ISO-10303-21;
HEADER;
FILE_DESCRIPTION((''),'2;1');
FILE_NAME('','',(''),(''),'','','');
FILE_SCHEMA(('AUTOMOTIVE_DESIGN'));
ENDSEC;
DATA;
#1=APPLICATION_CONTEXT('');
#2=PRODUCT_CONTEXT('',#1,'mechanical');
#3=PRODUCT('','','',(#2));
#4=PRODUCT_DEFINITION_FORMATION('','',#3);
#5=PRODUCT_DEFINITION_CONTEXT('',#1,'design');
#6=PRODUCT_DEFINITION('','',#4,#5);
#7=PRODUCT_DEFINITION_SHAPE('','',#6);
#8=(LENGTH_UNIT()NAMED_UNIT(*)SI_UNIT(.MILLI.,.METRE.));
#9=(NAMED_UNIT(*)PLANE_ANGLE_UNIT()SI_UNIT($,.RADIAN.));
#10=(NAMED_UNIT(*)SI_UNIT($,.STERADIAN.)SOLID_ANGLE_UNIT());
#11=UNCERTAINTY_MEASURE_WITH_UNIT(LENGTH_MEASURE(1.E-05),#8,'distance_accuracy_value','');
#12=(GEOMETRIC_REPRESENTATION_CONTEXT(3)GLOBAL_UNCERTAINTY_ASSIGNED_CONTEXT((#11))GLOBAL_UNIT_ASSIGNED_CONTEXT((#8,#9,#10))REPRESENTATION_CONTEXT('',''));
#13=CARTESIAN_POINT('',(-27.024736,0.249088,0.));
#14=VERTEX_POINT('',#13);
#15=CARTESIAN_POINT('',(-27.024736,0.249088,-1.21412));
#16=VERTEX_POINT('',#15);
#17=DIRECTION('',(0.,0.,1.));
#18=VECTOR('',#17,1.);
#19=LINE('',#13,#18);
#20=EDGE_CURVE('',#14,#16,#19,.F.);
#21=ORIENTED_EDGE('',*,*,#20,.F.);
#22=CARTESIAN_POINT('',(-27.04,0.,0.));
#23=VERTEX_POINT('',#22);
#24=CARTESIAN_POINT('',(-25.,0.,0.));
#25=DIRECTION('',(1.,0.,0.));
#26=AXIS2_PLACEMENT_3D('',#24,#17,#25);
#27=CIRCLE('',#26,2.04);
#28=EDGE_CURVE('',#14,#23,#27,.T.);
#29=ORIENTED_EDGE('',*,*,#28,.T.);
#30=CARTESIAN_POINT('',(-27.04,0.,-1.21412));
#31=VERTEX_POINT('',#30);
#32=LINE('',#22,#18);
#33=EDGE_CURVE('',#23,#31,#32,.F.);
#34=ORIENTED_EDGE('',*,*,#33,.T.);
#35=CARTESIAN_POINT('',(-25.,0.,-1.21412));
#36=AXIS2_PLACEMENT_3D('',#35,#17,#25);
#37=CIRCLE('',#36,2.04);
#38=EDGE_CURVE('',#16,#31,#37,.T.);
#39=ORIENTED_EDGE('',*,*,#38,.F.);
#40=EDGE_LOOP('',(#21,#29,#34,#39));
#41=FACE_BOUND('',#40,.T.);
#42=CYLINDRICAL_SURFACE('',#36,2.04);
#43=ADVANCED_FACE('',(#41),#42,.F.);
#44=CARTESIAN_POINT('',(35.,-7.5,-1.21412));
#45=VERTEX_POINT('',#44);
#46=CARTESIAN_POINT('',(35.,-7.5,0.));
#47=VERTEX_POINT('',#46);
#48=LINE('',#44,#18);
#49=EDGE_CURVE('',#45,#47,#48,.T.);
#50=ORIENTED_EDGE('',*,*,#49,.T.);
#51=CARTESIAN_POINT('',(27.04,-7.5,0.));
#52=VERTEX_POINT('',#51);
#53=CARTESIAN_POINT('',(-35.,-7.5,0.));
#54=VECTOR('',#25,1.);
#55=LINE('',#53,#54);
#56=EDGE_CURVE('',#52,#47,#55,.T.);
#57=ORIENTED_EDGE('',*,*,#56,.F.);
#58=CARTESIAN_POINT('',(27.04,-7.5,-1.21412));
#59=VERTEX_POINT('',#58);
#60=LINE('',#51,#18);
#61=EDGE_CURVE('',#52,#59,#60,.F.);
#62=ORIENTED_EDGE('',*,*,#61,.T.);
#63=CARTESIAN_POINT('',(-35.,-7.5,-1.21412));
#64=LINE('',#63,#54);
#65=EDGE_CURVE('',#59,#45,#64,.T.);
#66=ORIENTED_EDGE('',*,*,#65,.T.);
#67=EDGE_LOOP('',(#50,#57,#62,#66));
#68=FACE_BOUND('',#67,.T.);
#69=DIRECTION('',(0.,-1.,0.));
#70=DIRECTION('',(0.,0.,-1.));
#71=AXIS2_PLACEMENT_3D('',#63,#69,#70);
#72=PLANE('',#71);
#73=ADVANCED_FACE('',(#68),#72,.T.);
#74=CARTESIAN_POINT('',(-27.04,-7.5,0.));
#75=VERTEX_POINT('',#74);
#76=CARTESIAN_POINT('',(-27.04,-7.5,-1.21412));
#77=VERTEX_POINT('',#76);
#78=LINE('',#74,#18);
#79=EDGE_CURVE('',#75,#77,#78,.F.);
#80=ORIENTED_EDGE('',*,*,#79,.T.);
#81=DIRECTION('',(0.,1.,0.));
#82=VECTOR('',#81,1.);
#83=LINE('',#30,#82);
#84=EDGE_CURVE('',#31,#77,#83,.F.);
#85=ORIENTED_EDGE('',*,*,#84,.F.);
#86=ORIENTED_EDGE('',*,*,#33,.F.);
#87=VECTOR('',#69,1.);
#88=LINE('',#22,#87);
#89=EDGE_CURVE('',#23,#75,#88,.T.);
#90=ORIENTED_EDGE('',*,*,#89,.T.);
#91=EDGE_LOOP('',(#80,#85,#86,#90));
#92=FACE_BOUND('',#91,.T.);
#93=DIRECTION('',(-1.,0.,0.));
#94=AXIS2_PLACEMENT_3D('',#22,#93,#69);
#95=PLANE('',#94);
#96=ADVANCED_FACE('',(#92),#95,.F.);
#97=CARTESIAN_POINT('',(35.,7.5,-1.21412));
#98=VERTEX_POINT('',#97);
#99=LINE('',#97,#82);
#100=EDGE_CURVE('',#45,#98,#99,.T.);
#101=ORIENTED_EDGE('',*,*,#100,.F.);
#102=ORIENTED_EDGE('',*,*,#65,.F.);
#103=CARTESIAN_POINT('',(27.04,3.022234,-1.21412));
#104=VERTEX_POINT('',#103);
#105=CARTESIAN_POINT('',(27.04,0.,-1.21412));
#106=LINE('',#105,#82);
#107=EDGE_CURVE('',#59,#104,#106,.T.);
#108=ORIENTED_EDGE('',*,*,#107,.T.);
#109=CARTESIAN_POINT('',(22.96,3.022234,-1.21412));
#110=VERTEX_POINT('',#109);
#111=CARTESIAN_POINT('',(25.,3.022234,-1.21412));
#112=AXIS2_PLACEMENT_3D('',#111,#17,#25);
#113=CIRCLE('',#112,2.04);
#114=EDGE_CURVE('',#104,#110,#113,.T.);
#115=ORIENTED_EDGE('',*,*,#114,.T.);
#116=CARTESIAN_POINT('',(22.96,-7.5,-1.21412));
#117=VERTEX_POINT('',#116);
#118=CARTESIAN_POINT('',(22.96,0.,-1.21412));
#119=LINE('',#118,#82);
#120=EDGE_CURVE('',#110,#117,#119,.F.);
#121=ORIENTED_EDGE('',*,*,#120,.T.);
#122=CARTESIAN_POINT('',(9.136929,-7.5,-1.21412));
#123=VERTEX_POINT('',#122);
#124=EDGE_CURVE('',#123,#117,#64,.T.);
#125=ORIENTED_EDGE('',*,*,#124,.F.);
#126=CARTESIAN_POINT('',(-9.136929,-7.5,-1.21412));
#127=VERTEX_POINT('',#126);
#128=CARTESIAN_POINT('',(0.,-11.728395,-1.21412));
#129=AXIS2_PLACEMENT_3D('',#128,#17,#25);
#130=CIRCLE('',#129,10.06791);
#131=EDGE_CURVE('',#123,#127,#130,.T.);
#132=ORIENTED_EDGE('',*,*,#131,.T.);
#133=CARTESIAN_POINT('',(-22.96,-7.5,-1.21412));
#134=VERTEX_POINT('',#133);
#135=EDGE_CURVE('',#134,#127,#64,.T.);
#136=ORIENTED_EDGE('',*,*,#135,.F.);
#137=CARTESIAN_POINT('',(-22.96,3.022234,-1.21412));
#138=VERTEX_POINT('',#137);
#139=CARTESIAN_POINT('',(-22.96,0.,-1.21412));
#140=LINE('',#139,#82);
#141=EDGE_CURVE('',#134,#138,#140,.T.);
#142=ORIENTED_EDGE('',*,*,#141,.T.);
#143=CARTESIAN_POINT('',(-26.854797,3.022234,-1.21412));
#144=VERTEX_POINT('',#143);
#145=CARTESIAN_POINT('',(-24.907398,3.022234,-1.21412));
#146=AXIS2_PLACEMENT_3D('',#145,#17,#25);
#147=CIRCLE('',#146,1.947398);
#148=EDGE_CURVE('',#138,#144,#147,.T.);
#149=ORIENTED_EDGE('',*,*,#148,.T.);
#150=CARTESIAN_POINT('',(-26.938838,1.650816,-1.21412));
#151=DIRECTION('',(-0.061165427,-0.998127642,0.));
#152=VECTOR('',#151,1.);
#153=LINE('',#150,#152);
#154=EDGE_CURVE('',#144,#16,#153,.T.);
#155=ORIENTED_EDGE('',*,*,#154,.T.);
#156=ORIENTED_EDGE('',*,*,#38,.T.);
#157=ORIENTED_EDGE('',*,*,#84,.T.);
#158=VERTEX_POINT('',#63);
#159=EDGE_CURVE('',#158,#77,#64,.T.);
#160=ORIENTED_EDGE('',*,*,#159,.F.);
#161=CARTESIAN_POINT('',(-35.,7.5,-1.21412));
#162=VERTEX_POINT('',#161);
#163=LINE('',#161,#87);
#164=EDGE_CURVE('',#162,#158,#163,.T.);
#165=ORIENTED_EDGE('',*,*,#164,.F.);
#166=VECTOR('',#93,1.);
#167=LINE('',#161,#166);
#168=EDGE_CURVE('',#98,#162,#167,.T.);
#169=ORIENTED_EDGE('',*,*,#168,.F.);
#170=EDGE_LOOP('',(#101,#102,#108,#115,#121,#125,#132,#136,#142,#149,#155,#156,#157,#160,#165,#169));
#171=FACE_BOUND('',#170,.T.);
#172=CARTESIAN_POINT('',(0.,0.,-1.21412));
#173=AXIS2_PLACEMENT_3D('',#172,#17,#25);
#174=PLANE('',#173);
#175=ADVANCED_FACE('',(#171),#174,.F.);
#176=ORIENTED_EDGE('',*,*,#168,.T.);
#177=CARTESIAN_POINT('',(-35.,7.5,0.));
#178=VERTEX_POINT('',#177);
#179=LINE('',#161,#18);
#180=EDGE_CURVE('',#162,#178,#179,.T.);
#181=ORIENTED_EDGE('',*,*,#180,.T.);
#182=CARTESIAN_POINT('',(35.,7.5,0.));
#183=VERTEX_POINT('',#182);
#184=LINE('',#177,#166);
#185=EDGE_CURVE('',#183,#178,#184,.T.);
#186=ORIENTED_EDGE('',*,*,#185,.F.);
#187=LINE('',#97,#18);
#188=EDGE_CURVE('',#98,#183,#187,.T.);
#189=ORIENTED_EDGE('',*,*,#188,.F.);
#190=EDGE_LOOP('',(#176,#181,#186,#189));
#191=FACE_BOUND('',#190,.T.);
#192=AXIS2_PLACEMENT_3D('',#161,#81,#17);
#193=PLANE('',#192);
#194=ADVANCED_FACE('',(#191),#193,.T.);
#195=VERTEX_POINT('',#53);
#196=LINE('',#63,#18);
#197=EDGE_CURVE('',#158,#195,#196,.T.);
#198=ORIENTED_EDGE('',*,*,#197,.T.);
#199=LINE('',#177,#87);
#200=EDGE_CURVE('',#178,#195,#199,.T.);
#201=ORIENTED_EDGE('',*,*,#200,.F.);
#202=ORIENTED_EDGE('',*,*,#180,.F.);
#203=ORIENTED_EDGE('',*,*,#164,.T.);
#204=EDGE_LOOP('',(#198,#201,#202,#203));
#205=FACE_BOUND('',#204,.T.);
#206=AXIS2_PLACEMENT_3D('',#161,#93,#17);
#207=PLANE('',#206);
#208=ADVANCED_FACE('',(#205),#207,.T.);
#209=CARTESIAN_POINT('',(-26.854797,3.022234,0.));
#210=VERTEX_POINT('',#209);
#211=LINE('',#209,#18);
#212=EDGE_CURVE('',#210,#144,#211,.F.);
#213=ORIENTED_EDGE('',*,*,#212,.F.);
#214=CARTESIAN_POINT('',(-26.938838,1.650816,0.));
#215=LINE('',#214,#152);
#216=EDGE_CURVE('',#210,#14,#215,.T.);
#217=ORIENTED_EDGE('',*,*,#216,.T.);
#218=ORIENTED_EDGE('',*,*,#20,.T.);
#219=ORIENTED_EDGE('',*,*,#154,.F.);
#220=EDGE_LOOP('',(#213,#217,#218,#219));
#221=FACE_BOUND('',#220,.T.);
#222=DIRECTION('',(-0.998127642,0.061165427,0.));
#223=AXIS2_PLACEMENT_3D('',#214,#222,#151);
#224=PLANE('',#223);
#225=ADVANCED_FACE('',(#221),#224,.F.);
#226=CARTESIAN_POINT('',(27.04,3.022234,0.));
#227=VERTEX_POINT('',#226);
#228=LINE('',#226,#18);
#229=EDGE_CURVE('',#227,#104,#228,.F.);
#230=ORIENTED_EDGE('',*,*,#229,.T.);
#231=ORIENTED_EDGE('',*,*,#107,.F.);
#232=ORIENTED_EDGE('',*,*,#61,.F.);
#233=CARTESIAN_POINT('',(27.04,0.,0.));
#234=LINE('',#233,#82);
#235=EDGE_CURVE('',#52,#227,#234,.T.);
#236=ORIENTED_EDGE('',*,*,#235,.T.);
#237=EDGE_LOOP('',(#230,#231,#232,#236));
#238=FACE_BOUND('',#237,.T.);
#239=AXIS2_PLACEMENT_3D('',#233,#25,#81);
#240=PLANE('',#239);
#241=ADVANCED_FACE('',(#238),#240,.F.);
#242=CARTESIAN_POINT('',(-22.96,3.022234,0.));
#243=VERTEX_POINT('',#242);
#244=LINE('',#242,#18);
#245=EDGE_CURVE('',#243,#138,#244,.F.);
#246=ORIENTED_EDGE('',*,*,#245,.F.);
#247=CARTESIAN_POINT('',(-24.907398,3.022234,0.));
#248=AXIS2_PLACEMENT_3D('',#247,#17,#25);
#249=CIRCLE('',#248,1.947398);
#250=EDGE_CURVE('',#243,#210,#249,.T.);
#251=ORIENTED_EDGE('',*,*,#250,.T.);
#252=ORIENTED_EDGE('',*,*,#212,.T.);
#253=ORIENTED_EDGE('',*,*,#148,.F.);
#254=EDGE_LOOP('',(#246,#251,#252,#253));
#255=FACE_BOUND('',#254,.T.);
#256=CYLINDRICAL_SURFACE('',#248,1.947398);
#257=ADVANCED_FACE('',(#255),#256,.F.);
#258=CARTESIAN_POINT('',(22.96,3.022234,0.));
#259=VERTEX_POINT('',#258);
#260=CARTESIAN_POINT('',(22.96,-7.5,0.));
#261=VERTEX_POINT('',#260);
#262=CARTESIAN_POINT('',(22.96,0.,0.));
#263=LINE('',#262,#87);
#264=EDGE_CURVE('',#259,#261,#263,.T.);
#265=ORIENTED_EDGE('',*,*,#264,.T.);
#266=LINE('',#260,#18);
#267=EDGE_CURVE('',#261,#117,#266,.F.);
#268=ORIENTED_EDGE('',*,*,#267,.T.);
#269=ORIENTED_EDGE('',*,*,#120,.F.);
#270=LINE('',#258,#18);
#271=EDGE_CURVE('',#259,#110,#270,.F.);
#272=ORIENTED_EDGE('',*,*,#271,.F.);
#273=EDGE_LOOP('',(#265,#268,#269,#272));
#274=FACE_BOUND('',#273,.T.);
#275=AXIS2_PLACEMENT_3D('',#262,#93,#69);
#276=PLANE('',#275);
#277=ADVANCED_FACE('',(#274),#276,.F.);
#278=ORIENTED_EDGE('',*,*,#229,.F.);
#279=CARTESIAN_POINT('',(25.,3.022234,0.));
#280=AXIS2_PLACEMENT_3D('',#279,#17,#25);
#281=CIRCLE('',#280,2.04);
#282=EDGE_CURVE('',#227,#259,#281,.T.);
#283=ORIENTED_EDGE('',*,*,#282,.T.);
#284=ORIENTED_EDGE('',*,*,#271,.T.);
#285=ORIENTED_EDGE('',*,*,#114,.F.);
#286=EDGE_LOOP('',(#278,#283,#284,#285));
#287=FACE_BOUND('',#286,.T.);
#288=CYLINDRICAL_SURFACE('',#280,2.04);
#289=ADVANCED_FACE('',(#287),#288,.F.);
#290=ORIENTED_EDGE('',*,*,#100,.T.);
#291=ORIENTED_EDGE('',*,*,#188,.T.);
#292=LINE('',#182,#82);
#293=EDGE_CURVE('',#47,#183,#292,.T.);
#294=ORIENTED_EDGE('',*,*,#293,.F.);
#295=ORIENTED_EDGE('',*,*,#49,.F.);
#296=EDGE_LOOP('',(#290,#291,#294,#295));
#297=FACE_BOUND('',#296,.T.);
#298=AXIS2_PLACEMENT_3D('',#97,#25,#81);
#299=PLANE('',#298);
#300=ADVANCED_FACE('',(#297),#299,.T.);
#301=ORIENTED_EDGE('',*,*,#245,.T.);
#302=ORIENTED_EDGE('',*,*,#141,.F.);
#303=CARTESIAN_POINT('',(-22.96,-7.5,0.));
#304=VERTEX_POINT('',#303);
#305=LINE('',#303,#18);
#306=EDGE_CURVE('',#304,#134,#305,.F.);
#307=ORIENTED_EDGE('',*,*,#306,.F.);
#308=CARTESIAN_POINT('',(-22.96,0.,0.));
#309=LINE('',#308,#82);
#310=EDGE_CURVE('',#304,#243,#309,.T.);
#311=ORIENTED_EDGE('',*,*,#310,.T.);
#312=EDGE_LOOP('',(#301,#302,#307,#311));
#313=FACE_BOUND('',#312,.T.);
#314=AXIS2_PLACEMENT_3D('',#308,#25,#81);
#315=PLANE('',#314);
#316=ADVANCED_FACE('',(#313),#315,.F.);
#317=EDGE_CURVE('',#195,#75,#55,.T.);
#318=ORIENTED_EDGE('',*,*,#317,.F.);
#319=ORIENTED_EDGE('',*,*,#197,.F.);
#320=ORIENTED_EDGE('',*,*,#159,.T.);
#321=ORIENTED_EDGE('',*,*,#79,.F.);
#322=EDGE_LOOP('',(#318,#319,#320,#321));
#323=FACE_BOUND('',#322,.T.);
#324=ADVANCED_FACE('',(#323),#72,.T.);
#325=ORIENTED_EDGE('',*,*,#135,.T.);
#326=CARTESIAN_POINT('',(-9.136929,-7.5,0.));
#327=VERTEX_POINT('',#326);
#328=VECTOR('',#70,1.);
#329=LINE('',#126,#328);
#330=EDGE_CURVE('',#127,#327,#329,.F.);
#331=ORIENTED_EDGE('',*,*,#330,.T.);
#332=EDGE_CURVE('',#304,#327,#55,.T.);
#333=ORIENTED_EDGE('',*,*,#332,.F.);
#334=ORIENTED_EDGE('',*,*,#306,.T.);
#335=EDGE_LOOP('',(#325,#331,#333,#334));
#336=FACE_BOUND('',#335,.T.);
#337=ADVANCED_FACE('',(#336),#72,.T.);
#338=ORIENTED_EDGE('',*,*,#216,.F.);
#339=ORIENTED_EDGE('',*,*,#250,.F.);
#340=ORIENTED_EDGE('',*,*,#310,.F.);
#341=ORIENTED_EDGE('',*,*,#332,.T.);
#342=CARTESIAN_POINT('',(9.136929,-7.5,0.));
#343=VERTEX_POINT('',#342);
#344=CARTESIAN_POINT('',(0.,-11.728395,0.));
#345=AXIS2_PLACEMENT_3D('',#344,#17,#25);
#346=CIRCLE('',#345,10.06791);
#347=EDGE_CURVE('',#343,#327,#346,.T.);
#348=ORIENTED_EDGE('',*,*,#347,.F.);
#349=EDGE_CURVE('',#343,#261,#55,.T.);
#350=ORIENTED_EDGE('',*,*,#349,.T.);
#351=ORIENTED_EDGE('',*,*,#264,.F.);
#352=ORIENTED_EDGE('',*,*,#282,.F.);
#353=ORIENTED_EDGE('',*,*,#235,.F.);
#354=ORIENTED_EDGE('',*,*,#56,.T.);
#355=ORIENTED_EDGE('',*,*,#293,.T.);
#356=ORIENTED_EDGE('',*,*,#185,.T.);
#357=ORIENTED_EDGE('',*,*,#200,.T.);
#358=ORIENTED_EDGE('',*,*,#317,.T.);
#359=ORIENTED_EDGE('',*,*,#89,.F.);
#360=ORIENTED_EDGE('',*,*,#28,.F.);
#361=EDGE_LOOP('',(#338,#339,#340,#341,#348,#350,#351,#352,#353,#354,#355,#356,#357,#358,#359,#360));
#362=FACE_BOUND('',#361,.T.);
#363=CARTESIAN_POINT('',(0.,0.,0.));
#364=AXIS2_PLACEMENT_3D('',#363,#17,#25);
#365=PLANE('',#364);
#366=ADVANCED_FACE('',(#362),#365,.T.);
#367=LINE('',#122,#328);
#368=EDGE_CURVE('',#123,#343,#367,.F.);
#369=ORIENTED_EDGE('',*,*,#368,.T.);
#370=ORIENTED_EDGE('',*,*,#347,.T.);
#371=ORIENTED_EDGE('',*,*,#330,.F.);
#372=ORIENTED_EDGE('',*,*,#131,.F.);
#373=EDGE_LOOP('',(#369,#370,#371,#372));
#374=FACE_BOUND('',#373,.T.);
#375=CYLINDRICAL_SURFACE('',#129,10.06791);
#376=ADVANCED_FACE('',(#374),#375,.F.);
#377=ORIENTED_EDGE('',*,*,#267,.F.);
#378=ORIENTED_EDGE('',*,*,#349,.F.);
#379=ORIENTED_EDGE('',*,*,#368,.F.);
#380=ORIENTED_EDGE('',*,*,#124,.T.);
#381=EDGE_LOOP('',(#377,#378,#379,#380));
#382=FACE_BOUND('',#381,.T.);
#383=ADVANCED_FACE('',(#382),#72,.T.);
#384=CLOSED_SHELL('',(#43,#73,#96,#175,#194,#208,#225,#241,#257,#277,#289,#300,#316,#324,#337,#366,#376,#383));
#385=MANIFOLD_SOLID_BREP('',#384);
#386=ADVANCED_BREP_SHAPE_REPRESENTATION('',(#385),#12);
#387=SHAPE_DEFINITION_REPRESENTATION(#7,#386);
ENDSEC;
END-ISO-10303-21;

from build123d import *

# Parameters (mm, degrees)
SKETCH1_W          = 70
SKETCH1_H          = 15
SKETCH1_R          = 2.04
BASE_FLANGE1_DEPTH = 1.21412
SKETCH3_R          = 10.067909511
CUT_EXTRUDE1_DEPTH = 10
CUT_EXTRUDE2_DEPTH = 10


# Sheet-metal steps are written as plain solids
with BuildPart() as part:
    # Sketch1 → Base-Flange1 (new body)
    with BuildSketch(Plane.XY):
        Rectangle(SKETCH1_W, SKETCH1_H)
        with Locations((-25, 0)):
            Circle(SKETCH1_R, mode=Mode.SUBTRACT)
        with Locations((25, 0)):
            Circle(SKETCH1_R, mode=Mode.SUBTRACT)
    extrude(amount=-BASE_FLANGE1_DEPTH)

    # Sketch3 → Cut-Extrude1 (cut)
    with BuildSketch(Plane.XY):
        with Locations((0, -11.728394917)):
            Circle(SKETCH3_R)
    extrude(amount=-CUT_EXTRUDE1_DEPTH, mode=Mode.SUBTRACT)

    # Sketch4 → Cut-Extrude2 (cut)
    with BuildSketch(Plane(origin=(0, 0, -1.21412), x_dir=(-1, 0, 0), z_dir=(0, 0, -1))):
        with BuildLine():
            Line((27.04, 0), (27.04, -7.5))
            Line((27.04, -7.5), (22.96, -7.5))
            Line((22.96, -7.5), (22.96, 0))
            Line((22.96, 0), (22.96, 3.022234101))
            ThreePointArc((22.96, 3.022234101), (24.907398497, 4.969632598), (26.854796994, 3.022234101))
            Line((26.854796994, 3.022234101), (27.04, 0))
        make_face()
        with BuildLine():
            Line((-22.96, 0), (-22.96, -7.5))
            Line((-22.96, -7.5), (-27.04, -7.5))
            Line((-27.04, -7.5), (-27.04, 0))
            Line((-27.04, 0), (-27.04, 3.022234101))
            ThreePointArc((-27.04, 3.022234101), (-25, 5.062234101), (-22.96, 3.022234101))
            Line((-22.96, 3.022234101), (-22.96, 0))
        make_face()
    extrude(amount=-CUT_EXTRUDE2_DEPTH, mode=Mode.SUBTRACT)


solid = part.part
